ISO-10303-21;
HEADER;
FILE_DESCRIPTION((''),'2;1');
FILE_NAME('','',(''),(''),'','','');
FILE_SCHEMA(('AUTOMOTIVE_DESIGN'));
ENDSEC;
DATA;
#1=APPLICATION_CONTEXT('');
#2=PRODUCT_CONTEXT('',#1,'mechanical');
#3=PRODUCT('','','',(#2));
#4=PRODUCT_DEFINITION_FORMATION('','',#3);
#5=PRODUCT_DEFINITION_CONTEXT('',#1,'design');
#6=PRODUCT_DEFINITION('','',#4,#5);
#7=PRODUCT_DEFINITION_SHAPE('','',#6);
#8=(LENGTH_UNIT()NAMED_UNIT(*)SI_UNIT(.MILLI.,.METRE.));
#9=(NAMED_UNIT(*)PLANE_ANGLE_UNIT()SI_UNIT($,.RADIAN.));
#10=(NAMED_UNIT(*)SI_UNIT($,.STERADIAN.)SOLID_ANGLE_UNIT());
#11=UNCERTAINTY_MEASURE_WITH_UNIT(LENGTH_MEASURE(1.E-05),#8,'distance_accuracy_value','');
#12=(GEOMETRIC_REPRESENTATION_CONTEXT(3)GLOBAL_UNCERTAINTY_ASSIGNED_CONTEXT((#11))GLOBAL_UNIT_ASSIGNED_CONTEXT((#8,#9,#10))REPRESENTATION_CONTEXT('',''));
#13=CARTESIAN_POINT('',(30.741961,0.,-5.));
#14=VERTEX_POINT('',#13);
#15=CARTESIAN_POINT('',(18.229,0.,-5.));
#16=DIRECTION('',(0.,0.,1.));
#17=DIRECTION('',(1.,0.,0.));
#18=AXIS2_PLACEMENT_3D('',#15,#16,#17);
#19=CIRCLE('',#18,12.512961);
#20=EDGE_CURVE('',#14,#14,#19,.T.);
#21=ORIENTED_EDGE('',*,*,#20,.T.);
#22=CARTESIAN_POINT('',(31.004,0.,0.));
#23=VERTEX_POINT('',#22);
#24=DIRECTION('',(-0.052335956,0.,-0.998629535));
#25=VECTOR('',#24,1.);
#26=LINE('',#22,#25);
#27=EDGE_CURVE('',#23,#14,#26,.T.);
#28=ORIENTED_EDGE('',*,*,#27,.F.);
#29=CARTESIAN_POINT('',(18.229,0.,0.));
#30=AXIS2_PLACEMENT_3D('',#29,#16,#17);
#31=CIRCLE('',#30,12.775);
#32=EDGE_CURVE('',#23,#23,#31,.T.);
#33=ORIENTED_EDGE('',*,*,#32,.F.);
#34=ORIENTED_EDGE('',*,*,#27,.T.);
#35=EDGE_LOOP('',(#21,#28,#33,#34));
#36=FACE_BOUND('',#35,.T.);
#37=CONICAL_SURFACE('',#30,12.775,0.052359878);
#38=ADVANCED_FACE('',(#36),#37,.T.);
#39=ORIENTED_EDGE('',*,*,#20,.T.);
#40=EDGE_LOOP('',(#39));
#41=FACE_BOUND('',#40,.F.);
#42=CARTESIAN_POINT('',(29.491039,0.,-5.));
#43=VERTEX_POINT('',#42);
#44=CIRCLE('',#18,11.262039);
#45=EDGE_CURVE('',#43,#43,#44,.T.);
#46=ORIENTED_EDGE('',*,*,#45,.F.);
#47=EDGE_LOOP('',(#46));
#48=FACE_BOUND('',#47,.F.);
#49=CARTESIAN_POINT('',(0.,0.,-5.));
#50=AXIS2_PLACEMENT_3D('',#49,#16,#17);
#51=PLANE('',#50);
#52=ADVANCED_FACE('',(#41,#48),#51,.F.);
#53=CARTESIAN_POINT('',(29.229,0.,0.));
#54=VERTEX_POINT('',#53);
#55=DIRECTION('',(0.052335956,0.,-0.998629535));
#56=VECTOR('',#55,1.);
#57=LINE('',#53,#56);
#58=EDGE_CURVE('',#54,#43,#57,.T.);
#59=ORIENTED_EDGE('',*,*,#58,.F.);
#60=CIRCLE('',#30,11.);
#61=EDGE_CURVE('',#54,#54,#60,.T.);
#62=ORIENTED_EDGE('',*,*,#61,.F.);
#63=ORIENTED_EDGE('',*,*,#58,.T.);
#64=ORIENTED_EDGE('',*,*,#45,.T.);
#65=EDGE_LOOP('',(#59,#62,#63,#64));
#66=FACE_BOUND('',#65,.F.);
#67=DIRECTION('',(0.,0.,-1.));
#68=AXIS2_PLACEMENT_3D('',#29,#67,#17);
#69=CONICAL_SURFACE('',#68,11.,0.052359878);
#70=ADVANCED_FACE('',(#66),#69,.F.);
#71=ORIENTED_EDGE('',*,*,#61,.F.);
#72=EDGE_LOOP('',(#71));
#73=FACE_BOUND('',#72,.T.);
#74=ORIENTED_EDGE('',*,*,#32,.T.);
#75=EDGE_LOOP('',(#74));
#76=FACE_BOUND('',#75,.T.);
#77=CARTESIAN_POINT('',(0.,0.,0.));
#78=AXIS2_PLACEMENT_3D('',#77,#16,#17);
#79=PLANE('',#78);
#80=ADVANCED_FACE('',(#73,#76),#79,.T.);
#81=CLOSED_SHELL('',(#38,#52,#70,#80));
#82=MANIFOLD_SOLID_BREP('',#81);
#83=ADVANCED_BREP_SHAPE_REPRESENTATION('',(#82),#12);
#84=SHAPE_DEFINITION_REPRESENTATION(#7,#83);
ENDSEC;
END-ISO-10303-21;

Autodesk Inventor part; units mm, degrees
ref_plane "YZ Plane" through (0, 0, 0) normal (1, 0, 0) x (0, 1, 0)
ref_plane "XZ Plane" through (0, 0, 0) normal (0, 1, 0) x (-1, 0, 0)
ref_plane "Arbeitsebene1" through (0, 0, 0) normal (0, 0, 1) x (1, 0, 0)
sketch "Skizze1" plane through (0, 0, 0) normal (0, 0, 1) x (1, 0, 0)
  circle A0 centre (18.229, 0) radius 12.775 projected
  arc A1 (-21.8552, 14.25) -> (-23.8552, 12.25) centre (-21.8552, 12.25) ccw projected
  line L0 (-23.8552, 12.25) -> (-23.8552, -12.25) projected
  arc A2 (-23.8552, -12.25) -> (-21.8552, -14.25) centre (-21.8552, -12.25) ccw projected
  line L1 (-21.8552, -14.25) -> (18.229, -14.25) projected
  arc A3 (18.229, -14.25) -> (18.229, 14.25) centre (18.229, 0) ccw projected
  line L2 (18.229, 14.25) -> (-21.8552, 14.25) projected
  circle A4 centre (18.229, 0) radius 11
  point P0 (0, 0)
  dimension "d0" = 22
ref_plane "Arbeitsebene2" through (5.454, -12.775, -6.25) normal (0, 0, 1) x (1, 0, 0)
extrude "Extrusion1" add sketch "Skizze1" against normal blind 5 draft -3 contours A0
properties part number "10_Filteslide_25mm_insert_thin"
